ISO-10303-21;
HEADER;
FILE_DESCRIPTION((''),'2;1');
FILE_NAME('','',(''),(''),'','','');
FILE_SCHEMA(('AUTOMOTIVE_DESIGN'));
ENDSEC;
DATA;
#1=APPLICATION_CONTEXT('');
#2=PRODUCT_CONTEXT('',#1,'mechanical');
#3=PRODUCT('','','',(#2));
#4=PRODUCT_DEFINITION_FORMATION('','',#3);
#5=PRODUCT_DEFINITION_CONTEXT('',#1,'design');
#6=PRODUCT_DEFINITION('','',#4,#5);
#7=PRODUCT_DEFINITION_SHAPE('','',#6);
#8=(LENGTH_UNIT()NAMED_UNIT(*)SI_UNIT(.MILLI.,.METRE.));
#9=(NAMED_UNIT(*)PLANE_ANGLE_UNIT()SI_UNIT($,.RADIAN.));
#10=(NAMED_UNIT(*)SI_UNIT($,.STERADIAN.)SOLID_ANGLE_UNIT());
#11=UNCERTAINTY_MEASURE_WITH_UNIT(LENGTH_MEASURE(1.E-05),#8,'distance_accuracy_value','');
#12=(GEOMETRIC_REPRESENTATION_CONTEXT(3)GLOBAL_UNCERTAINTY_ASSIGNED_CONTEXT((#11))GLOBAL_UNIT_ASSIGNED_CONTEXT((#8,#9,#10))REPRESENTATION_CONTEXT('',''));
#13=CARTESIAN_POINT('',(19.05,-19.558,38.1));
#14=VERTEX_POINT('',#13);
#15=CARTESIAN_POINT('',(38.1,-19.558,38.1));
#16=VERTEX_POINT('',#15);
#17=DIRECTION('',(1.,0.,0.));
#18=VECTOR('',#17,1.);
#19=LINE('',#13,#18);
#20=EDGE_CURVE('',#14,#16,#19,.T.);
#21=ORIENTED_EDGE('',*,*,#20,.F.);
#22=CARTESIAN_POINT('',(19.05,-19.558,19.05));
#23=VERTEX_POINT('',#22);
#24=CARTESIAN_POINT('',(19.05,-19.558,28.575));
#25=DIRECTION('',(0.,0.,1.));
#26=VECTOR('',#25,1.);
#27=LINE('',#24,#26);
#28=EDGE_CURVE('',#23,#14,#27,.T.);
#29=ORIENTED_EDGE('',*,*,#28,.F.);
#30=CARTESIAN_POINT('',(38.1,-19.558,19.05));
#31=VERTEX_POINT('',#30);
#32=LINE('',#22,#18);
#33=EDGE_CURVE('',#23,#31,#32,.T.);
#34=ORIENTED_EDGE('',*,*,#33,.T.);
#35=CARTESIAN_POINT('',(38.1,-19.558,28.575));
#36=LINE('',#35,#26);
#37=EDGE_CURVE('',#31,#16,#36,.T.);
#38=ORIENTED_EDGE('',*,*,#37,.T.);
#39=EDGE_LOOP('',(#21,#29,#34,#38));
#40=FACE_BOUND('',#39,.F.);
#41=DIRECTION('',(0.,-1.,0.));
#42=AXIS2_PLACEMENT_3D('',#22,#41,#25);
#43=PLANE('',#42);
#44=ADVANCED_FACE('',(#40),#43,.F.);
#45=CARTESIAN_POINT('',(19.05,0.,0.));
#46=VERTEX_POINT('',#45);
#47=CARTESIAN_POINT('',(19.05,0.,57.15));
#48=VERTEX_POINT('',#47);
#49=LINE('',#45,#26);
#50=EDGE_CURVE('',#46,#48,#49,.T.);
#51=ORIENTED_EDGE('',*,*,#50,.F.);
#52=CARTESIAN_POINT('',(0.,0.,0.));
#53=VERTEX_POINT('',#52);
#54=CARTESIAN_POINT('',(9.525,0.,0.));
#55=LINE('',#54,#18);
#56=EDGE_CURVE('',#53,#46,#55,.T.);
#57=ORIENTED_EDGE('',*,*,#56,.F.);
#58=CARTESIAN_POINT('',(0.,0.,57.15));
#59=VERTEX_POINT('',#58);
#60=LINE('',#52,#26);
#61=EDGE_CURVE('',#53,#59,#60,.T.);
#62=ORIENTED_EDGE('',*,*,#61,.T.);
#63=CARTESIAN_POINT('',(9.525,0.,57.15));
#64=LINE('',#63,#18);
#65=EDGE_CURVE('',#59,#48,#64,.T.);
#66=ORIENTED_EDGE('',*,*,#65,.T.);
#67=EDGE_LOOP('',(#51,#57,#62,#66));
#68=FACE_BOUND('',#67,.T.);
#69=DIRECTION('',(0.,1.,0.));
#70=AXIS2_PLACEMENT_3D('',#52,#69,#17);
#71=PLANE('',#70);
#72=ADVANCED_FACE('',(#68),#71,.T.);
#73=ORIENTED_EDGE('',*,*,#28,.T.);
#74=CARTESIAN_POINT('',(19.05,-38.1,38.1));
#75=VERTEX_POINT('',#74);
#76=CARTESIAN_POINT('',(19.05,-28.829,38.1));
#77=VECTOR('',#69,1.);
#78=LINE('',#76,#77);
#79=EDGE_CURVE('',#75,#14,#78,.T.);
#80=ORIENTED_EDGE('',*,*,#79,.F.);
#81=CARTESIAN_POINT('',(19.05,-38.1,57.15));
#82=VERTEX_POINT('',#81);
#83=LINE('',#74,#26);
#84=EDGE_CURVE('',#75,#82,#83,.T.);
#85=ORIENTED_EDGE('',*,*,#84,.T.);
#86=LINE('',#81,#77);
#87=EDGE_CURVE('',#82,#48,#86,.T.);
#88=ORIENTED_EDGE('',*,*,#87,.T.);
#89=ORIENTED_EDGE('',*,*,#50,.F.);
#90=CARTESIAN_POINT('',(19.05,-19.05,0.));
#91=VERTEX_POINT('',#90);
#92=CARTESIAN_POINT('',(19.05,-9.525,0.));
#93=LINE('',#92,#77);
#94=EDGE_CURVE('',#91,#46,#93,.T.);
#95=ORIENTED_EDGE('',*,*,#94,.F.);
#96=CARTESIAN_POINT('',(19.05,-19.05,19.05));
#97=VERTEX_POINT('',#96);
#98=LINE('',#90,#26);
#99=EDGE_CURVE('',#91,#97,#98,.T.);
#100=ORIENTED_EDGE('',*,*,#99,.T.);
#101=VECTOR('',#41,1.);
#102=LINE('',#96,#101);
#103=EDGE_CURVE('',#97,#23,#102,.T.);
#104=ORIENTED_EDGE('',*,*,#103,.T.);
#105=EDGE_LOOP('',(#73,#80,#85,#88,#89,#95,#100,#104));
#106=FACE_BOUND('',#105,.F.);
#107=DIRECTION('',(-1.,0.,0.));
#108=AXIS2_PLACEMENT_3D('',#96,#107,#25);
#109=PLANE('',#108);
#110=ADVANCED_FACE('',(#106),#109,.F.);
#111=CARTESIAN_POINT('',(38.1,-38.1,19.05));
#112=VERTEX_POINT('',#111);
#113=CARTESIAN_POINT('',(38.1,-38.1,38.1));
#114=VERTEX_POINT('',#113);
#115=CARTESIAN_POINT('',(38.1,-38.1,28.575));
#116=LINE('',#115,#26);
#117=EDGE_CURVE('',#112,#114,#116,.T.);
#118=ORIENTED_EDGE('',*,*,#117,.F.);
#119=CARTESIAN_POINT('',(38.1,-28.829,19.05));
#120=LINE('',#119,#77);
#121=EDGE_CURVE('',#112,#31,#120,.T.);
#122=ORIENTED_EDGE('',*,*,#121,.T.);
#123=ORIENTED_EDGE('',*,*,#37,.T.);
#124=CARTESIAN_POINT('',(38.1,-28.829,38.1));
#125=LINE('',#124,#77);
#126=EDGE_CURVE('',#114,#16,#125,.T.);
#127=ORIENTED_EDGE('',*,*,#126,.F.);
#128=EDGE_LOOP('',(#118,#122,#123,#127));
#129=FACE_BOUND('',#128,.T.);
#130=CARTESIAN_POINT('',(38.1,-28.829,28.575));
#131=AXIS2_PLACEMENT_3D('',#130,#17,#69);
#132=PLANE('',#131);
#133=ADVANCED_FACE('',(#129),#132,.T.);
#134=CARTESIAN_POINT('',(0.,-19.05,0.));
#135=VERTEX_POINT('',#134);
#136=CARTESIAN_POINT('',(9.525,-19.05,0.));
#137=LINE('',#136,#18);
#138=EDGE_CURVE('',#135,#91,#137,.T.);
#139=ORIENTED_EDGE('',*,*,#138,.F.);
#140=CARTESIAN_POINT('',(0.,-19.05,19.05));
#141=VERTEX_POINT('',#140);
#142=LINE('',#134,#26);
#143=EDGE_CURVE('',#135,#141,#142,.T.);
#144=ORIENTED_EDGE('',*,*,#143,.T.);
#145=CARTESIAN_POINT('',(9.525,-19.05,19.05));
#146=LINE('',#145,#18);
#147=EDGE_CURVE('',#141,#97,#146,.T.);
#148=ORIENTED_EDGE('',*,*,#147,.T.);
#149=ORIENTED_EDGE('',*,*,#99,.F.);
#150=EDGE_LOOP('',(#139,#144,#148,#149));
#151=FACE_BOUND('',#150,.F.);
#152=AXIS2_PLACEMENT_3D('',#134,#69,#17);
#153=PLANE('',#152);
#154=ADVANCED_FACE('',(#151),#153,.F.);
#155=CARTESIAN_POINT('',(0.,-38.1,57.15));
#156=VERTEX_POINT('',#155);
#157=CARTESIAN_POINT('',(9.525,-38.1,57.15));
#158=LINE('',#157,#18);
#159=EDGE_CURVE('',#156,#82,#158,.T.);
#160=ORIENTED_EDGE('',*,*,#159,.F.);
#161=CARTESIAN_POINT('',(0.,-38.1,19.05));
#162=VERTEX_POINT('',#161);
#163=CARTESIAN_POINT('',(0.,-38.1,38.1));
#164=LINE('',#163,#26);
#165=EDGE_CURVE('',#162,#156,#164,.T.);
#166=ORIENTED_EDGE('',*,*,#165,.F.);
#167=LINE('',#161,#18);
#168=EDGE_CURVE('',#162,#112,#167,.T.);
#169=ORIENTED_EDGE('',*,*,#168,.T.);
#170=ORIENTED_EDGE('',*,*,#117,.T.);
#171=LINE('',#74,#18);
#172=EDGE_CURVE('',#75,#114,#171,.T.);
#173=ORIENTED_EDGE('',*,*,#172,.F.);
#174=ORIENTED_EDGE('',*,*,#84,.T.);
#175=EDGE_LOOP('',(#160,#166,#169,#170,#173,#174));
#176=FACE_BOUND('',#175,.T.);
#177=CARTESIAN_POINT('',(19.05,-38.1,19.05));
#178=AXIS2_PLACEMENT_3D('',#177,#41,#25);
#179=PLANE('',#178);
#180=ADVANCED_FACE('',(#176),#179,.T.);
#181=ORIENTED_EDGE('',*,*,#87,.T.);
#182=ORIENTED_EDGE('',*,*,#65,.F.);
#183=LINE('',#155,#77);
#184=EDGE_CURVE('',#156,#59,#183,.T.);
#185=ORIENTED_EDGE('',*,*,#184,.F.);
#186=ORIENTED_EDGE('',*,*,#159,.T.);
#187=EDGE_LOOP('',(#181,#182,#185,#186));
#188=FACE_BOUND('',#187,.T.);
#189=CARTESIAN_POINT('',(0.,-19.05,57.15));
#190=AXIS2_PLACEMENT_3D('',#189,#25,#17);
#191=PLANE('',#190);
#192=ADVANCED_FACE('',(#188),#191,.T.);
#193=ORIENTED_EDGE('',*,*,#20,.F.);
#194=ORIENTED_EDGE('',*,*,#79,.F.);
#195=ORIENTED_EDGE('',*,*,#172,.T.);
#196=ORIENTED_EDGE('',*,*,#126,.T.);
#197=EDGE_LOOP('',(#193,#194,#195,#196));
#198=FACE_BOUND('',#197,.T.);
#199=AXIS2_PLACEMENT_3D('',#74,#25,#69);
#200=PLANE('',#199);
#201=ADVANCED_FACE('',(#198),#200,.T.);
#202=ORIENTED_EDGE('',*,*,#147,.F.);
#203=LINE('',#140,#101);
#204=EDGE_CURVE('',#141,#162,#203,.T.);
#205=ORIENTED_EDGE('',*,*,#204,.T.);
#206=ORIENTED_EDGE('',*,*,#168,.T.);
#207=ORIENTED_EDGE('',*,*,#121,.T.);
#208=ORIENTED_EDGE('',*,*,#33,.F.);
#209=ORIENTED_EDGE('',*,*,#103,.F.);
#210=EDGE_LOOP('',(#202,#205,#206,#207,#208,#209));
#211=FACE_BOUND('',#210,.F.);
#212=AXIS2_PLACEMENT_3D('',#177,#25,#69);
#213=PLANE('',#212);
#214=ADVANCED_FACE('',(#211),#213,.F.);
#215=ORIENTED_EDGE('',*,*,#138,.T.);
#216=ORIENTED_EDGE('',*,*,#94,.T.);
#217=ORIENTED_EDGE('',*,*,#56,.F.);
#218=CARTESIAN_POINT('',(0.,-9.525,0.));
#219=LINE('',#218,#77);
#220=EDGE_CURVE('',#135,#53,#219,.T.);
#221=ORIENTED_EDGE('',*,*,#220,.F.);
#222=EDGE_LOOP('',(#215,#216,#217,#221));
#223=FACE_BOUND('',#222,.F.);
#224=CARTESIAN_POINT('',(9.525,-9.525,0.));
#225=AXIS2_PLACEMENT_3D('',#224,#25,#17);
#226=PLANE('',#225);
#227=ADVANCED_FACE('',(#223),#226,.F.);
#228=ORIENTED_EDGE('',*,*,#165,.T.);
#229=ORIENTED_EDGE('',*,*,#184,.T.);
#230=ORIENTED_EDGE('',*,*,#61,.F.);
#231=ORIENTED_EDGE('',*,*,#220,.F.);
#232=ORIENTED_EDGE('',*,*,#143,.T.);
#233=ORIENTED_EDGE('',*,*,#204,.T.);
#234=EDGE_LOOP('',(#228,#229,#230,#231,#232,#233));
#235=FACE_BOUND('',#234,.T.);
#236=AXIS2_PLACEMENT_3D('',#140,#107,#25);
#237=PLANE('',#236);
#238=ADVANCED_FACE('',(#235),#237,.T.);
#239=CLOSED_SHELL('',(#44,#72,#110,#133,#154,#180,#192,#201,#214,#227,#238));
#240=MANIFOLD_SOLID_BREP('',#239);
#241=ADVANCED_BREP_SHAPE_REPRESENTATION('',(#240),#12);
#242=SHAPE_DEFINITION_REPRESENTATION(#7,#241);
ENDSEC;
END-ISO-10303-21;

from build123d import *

# Parameters (mm, degrees)
F0_W     = 19.05
F0_H     = 19.05
F1_DEPTH = 57.15
F2_W     = 19.05
F2_H     = 38.1
F3_DEPTH = 19.05
F4_W     = 18.542
F4_H     = 19.05
F5_DEPTH = 19.05


# Not quite as in the source:
# - a feature names something its author has since deleted; it is built from what else it names


with BuildPart() as f1:
    # F0 (on Top) → F1 (new body)
    with BuildSketch(Plane.XY):
        with Locations((9.525, -9.525)):
            Rectangle(F0_W, F0_H)
    extrude(amount=F1_DEPTH)

    # F2 (on face) → F3 (join)
    with BuildSketch(Plane.XZ.offset(19.05)):
        with Locations((9.525, 38.1)):
            Rectangle(F2_W, F2_H)
    extrude(amount=F3_DEPTH)

    # F4 (on face) → F5 (join)
    with BuildSketch(Plane.YZ.offset(19.05)):
        with Locations((-28.829, 28.575)):
            Rectangle(F4_W, F4_H)
    extrude(amount=F5_DEPTH)


solid = f1.part
